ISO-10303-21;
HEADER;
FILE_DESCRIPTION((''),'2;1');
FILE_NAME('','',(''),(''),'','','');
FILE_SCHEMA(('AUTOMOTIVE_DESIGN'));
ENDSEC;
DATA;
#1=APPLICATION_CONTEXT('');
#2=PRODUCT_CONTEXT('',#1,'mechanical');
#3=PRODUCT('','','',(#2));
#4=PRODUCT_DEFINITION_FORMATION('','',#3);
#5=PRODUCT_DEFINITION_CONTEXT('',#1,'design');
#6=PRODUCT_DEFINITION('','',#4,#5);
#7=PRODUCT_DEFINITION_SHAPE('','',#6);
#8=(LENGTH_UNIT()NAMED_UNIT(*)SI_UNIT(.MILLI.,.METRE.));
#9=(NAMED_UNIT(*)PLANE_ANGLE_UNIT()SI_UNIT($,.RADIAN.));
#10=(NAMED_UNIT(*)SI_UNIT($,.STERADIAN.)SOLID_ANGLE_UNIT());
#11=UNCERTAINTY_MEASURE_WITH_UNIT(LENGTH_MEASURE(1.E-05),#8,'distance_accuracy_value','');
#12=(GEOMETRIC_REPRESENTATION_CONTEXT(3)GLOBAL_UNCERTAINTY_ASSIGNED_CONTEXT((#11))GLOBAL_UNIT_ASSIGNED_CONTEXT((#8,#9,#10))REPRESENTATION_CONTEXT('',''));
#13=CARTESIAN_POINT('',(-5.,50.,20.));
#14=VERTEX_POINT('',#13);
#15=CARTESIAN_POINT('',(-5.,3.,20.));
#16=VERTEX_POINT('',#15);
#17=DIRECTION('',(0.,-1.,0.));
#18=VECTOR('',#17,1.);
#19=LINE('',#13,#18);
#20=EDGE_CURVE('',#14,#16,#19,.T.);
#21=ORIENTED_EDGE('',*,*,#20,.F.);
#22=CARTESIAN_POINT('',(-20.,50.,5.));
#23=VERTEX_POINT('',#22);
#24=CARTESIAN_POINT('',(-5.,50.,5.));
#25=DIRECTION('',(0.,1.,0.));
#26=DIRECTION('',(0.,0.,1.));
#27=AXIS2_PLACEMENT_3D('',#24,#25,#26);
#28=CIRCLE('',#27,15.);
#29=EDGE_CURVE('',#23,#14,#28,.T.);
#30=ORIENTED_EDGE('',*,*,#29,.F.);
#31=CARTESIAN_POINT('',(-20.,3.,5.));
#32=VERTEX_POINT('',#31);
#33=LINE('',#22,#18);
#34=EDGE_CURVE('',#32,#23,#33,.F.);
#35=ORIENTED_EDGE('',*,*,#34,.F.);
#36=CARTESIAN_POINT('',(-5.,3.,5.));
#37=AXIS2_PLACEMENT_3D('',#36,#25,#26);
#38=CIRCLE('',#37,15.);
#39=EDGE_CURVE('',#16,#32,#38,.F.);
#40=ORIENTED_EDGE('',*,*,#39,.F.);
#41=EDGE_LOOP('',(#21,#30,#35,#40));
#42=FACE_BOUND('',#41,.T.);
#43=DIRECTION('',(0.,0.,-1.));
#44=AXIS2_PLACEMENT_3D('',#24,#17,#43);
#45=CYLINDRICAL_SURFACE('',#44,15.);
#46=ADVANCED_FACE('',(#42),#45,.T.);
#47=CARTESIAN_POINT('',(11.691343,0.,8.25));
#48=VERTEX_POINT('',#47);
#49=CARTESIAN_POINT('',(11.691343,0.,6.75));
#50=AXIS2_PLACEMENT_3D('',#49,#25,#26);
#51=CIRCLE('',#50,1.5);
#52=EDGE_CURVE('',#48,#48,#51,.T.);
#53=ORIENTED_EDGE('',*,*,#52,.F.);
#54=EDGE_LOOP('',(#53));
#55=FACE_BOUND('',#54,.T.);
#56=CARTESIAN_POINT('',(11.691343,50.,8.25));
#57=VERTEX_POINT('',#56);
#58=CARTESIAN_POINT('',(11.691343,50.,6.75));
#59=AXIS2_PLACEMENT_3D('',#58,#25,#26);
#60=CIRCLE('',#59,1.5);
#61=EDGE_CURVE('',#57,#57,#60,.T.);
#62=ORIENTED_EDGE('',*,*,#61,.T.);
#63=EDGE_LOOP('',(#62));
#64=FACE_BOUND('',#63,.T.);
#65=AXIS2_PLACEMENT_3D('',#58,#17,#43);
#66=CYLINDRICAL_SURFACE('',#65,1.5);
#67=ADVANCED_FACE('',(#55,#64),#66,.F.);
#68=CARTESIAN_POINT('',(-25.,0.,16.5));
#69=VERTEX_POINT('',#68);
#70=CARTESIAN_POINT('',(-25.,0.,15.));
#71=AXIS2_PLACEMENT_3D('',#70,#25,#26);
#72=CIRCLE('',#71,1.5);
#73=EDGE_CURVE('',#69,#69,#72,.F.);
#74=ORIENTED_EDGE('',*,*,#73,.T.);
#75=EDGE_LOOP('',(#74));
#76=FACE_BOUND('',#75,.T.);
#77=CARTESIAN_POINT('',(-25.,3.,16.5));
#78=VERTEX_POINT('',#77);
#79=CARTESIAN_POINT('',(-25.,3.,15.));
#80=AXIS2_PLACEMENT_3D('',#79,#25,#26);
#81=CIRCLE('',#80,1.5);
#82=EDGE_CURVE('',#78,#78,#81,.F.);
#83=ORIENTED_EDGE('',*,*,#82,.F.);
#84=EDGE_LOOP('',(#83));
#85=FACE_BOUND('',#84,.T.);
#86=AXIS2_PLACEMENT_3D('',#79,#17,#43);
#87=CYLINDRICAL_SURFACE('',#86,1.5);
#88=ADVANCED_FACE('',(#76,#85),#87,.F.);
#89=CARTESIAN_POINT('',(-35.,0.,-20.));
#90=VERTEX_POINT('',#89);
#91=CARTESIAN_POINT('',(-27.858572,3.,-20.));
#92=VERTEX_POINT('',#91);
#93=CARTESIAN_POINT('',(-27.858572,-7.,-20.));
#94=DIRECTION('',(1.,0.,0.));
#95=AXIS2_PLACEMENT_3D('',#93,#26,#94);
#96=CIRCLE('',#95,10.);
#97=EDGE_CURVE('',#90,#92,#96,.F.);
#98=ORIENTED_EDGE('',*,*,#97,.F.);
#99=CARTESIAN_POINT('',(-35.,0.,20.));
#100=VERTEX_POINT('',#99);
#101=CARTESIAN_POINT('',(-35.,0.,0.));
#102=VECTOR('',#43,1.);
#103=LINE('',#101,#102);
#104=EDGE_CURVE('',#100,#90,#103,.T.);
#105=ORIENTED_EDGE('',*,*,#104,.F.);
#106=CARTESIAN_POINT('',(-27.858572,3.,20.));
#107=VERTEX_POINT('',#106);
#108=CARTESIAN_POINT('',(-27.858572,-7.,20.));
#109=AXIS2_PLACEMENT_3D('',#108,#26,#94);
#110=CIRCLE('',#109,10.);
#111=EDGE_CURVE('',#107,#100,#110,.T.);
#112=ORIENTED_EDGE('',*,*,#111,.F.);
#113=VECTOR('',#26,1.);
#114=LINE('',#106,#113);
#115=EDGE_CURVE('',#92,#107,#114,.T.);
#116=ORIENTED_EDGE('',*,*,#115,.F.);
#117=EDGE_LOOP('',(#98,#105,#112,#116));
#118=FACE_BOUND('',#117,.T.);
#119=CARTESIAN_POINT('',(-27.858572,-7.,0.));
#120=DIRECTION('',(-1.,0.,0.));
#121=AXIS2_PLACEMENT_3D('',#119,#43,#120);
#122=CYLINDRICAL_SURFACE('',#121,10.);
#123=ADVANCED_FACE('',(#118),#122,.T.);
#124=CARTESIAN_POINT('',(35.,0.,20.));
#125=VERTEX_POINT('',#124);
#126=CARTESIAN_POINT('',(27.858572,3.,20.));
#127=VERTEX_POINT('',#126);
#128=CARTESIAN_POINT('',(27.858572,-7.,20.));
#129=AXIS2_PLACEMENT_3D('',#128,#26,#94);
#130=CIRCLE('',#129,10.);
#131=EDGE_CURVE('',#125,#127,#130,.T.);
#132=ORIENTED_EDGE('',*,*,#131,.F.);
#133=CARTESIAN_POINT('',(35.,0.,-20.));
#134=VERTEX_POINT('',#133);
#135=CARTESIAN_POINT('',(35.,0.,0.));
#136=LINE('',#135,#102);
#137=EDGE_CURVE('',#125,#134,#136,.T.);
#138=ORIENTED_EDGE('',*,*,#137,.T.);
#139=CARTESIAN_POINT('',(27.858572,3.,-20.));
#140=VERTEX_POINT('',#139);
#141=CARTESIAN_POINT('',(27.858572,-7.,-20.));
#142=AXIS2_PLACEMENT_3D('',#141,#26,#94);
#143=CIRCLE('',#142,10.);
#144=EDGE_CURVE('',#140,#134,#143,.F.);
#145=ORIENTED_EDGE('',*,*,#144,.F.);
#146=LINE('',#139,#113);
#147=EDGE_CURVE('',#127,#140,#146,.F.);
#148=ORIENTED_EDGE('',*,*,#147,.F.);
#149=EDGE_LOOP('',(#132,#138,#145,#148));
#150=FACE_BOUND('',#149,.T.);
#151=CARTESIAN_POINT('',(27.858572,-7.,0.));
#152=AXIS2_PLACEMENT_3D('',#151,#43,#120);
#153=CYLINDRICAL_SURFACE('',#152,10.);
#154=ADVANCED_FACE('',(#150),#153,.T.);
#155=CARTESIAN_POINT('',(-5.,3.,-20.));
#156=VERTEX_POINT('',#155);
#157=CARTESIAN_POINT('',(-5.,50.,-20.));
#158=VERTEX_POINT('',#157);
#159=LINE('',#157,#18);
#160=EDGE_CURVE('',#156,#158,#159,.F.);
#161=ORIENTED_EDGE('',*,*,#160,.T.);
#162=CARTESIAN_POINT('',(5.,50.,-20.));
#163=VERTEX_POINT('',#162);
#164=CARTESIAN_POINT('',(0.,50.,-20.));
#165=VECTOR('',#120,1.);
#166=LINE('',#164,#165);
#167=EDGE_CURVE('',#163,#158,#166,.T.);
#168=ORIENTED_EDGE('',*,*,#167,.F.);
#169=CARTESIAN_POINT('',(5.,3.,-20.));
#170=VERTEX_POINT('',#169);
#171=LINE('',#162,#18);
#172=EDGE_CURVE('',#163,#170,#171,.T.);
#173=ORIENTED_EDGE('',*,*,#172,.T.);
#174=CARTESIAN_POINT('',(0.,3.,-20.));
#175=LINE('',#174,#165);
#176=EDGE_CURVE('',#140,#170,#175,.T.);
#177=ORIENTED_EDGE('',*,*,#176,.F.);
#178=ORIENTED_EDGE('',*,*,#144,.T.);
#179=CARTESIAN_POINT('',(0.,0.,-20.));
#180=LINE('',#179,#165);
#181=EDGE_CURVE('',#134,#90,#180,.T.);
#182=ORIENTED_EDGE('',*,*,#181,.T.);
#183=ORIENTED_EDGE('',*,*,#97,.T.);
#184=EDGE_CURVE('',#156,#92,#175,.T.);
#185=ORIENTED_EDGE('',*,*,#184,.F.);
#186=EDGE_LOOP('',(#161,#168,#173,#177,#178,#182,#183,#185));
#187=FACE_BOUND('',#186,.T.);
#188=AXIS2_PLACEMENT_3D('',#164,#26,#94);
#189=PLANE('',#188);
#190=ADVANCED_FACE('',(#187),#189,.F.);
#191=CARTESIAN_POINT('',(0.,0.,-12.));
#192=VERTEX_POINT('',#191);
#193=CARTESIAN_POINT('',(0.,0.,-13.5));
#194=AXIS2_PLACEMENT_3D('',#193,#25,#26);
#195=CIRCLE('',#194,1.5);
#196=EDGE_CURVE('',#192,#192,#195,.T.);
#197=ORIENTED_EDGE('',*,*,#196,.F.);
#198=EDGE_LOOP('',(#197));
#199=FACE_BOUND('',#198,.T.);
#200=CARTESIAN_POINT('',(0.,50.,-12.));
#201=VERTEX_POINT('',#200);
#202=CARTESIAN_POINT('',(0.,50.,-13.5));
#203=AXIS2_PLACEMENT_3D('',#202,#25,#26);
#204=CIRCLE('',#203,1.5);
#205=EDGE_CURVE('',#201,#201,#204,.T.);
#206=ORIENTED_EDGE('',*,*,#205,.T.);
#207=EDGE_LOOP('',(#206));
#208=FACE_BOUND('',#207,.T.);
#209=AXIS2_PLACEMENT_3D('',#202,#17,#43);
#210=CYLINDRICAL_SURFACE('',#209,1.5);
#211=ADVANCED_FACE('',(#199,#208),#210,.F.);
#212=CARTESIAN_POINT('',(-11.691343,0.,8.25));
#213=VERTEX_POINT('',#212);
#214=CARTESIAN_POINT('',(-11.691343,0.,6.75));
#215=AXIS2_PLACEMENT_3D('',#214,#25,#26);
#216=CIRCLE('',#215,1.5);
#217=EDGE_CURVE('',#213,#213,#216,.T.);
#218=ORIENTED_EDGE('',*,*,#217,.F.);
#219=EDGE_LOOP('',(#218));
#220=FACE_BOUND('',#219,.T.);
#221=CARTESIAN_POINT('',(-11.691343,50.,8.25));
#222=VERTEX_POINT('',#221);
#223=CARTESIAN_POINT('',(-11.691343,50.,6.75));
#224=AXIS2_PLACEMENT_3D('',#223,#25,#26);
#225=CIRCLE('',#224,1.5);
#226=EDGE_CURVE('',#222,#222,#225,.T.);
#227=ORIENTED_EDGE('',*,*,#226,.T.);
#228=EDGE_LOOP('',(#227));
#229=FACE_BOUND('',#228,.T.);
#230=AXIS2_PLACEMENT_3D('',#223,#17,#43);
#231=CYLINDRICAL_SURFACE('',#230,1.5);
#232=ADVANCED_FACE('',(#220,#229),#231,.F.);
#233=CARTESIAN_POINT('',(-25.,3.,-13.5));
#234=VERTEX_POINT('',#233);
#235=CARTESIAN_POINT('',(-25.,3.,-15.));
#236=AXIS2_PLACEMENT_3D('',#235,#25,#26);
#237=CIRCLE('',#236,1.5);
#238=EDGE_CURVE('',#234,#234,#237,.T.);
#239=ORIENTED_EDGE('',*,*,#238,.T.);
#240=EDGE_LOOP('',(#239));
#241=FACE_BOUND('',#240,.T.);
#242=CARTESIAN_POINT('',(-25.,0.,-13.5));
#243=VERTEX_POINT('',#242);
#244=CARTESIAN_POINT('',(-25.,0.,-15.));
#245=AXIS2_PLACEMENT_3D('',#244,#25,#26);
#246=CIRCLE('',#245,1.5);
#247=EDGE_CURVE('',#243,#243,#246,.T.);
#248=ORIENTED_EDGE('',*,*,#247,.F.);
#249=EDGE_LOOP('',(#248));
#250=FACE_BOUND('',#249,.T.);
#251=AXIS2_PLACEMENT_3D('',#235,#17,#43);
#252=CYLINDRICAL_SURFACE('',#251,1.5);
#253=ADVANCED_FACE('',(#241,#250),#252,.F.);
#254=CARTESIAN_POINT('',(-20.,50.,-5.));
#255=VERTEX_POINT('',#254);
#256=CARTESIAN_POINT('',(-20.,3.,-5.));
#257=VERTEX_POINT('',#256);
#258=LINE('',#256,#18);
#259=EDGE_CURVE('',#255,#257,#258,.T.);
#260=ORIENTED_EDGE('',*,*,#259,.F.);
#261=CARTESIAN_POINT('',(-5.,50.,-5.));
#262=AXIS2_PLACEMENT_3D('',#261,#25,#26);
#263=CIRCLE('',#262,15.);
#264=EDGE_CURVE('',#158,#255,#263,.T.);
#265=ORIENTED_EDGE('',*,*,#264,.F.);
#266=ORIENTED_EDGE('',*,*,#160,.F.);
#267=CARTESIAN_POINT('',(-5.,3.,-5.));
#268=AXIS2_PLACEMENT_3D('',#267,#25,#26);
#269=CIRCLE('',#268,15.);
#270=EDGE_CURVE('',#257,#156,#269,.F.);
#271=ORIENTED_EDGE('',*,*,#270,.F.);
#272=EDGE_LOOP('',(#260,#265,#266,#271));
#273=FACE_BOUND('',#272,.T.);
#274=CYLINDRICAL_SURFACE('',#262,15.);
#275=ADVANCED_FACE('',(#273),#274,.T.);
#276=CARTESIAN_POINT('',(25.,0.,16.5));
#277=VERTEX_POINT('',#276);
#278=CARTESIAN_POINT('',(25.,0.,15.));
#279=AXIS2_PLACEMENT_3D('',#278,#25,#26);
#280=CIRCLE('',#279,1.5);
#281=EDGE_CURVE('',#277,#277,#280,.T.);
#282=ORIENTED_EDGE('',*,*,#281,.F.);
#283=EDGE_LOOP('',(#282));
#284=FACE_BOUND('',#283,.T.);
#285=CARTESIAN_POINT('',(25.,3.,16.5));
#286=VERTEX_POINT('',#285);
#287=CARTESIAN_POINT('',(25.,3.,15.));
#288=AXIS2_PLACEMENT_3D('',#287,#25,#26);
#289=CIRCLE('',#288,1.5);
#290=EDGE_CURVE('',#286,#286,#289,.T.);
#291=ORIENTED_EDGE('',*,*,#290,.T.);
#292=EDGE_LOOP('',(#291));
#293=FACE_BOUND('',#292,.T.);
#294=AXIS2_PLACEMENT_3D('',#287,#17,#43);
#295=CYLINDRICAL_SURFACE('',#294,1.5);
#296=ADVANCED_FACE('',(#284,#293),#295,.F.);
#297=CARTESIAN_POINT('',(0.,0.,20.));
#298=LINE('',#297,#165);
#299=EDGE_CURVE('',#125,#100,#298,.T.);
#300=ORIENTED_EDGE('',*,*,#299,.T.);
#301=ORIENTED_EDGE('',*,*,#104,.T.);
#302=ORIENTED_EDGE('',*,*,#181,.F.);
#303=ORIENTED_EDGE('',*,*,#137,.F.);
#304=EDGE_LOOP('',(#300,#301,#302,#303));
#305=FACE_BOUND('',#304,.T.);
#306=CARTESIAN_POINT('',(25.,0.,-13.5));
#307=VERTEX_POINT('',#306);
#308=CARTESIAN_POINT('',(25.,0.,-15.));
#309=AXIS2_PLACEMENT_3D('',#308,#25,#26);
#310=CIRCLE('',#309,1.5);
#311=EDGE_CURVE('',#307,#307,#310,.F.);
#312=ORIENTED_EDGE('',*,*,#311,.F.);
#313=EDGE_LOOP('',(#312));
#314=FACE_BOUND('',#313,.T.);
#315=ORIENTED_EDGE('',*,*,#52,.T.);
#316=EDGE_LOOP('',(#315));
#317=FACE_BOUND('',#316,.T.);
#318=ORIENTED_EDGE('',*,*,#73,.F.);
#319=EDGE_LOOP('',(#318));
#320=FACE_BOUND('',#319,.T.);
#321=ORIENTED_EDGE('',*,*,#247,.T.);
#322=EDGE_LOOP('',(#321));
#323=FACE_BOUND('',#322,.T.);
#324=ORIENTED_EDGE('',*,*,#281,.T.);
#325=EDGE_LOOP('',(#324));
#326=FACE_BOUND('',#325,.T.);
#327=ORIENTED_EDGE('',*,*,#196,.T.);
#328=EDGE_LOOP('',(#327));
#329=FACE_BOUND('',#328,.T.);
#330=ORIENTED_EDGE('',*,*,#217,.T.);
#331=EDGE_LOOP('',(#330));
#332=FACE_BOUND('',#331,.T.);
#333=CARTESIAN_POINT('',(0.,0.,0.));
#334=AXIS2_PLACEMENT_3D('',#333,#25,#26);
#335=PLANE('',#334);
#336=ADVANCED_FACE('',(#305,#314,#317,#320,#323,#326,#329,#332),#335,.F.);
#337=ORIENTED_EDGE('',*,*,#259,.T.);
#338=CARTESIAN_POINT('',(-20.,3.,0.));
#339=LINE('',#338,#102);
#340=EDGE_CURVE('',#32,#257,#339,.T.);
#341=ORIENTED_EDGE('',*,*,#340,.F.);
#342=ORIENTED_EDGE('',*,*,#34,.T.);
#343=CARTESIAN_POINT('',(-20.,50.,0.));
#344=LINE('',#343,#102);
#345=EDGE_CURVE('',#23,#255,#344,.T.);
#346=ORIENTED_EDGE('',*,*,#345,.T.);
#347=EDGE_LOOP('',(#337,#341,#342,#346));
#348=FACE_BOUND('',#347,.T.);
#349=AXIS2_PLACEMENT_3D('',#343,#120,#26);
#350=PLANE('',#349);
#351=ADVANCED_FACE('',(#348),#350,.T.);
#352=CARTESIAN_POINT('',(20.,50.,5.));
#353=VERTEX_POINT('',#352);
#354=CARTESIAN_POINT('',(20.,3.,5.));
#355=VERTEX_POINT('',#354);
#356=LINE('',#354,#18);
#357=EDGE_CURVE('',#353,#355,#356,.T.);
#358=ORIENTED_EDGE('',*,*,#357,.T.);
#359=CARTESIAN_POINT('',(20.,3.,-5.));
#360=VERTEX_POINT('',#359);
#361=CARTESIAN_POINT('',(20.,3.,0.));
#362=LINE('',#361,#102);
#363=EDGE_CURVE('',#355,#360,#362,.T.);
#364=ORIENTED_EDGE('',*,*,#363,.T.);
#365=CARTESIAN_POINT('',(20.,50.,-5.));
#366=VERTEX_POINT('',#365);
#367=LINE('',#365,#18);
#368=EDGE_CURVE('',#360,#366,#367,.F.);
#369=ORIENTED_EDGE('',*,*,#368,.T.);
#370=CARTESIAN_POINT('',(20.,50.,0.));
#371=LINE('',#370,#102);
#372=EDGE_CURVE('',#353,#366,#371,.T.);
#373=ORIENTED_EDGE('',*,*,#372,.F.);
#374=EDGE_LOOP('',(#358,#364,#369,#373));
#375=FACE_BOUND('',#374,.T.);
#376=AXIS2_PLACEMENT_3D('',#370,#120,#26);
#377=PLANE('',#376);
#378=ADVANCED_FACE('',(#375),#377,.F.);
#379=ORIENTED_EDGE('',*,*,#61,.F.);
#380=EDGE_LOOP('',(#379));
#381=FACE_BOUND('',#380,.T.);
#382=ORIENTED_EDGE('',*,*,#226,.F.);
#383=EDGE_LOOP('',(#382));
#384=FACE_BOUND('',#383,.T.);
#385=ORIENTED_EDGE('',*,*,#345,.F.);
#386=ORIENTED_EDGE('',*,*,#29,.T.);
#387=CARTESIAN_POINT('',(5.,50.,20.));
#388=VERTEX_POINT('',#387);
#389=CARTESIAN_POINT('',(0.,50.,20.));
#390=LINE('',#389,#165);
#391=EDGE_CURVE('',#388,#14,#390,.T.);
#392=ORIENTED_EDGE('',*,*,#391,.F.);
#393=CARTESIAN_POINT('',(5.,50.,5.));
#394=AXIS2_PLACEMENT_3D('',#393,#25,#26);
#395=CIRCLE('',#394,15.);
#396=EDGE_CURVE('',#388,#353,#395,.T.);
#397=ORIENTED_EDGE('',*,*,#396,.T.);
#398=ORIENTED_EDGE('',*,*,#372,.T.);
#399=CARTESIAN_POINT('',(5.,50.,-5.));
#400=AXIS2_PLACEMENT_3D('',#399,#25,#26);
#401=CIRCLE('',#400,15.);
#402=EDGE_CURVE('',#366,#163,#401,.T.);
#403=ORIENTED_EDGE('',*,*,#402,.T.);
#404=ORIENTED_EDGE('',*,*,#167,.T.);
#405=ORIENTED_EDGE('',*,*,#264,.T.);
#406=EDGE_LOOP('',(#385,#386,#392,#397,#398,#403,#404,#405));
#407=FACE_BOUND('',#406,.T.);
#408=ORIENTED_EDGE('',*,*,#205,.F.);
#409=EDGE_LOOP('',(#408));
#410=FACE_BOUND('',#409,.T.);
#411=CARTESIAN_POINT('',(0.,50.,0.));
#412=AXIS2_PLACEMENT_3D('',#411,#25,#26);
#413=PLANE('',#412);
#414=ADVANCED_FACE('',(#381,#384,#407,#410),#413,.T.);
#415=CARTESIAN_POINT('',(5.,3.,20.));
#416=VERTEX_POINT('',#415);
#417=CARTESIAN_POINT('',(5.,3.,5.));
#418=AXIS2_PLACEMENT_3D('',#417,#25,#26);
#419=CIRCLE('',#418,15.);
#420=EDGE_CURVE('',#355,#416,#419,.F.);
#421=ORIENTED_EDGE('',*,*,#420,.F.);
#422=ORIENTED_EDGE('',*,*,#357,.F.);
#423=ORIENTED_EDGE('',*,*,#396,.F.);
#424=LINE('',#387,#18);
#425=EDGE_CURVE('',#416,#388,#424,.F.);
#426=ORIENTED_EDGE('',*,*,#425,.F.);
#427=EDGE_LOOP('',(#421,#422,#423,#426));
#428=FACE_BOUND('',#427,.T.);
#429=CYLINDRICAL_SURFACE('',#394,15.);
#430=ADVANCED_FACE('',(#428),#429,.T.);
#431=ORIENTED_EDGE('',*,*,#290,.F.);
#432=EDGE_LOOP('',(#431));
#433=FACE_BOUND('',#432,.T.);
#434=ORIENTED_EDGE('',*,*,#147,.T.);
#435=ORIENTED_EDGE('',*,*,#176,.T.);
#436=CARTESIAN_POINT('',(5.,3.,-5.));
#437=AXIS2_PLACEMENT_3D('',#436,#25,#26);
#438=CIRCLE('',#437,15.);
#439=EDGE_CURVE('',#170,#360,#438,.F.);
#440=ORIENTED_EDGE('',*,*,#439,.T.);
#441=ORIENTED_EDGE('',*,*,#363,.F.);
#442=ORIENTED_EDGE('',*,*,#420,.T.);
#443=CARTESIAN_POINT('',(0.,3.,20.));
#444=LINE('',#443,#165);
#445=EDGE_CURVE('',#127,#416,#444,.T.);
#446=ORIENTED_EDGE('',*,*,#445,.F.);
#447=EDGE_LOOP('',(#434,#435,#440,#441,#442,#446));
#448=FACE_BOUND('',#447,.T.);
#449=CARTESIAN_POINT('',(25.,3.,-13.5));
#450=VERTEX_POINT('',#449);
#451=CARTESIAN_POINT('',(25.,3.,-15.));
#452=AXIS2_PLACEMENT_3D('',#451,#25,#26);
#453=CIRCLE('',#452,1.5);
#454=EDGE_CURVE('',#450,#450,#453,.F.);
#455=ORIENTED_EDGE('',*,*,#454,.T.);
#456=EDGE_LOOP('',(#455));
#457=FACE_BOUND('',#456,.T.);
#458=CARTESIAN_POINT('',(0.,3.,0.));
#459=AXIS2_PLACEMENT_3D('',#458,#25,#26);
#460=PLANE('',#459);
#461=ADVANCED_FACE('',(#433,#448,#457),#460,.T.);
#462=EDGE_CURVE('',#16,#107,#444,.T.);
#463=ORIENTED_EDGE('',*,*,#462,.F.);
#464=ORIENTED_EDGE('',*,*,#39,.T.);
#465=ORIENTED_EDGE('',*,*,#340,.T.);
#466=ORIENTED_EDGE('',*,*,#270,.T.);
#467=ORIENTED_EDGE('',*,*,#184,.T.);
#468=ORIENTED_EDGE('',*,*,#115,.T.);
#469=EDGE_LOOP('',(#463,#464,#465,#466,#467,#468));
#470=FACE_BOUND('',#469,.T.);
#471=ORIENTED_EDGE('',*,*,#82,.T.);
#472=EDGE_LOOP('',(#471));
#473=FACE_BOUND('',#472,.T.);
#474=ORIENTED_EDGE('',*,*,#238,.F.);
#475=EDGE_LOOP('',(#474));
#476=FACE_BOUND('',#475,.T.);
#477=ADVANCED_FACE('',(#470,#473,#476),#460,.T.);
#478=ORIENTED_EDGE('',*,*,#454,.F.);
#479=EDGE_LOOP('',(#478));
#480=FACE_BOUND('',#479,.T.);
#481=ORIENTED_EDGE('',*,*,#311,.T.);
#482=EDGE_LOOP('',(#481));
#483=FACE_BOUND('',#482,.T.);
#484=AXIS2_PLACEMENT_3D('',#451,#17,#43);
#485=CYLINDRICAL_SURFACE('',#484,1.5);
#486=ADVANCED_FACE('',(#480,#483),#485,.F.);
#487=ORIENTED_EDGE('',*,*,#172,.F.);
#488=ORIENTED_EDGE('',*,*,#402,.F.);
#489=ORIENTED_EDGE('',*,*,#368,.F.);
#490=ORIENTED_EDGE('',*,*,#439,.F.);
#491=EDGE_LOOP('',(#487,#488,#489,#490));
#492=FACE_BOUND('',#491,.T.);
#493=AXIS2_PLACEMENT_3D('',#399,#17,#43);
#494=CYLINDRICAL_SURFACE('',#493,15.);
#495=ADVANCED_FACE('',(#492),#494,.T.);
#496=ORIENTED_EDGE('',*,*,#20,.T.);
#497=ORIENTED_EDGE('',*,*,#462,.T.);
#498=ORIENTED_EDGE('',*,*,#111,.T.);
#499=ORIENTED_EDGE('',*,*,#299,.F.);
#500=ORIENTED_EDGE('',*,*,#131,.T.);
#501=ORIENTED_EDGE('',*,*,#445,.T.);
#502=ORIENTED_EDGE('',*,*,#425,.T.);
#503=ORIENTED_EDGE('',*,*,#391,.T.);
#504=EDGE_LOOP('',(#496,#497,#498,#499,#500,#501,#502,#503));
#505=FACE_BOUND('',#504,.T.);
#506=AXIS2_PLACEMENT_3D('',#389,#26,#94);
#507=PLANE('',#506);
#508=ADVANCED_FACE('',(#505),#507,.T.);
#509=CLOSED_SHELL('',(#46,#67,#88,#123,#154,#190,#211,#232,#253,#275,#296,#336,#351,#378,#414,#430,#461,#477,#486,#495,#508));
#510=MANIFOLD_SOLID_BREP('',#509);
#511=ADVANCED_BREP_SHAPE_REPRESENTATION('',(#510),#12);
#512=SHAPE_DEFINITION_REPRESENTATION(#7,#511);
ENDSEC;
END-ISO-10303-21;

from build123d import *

# Parameters (mm, degrees)
SKETCH1_W           = 40
SKETCH1_H           = 40
SKETCH1_R           = 1.5
BOSS_EXTRUDE1_DEPTH = 50
SKETCH1_3_W         = 15
SKETCH1_3_H         = 40
SKETCH1_3_R         = 1.5
BOSS_EXTRUDE2_DEPTH = 3
FILLET1_R           = 10
FILLET2_R           = 15


with BuildPart() as part:
    # Sketch1 → Boss-Extrude1 (new body)
    with BuildSketch(Plane(origin=(0, 0, 0), x_dir=(1, 0, 0), z_dir=(0, 1, 0))):
        Rectangle(SKETCH1_W, SKETCH1_H)
        with Locations(Location((-11.691342951, -6.75, 0), (0, 0, 270))):
            Circle(SKETCH1_R, mode=Mode.SUBTRACT)
        with Locations(Location((11.691342951, -6.75, 0), (0, 0, 270))):
            Circle(SKETCH1_R, mode=Mode.SUBTRACT)
        with Locations(Location((0, 13.5, 0), (0, 0, 270))):
            Circle(SKETCH1_R, mode=Mode.SUBTRACT)
    extrude(amount=BOSS_EXTRUDE1_DEPTH)

    # Sketch1<3> → Boss-Extrude2 (add)
    # profile 1 of 2: a face of its own
    with BuildSketch(Plane(origin=(0, 0, 0), x_dir=(1, 0, 0), z_dir=(0, 1, 0))):
        with Locations((-27.5, 0)):
            Rectangle(SKETCH1_3_W, SKETCH1_3_H)
        with Locations(Location((-25, -15, 0), (0, 0, 270))):
            Circle(SKETCH1_3_R, mode=Mode.SUBTRACT)
        with Locations(Location((-25, 15, 0), (0, 0, 270))):
            Circle(SKETCH1_3_R, mode=Mode.SUBTRACT)
    # profile 2 of 2: a face of its own
    with BuildSketch(Plane(origin=(0, 0, 0), x_dir=(1, 0, 0), z_dir=(0, 1, 0))):
        with Locations((27.5, 0)):
            Rectangle(SKETCH1_3_W, SKETCH1_3_H)
        with Locations(Location((25, -15, 0), (0, 0, 270))):
            Circle(SKETCH1_3_R, mode=Mode.SUBTRACT)
        with Locations(Location((25, 15, 0), (0, 0, 270))):
            Circle(SKETCH1_3_R, mode=Mode.SUBTRACT)
    extrude(amount=BOSS_EXTRUDE2_DEPTH)

    # Fillet1
    # the kernel refuses this fillet: 10 mm, written as the material it takes off along each edge
    with BuildSketch(Plane(origin=(35, 3, 37.853571071), x_dir=(0, -1, 0), z_dir=(0, 0, -1))) as fillet1_piece_1:
        with BuildLine():
            CenterArc((10, 7.141428429), FILLET1_R, 180, 45.572995999)
            Line((0, 7.141428429), (-0.2, 7.141428429))
            Line((-0.2, 7.141428429), (-0.2, 0))
            Line((-0.2, 0), (0, -0.2))
            ThreePointArc((0, -0.2), (1.5, -0.2), (2.86, -0.142828569))
            Line((2.86, -0.142828569), (3, 0))
        make_face()
    extrude(amount=75.707142143, mode=Mode.SUBTRACT)
    with BuildSketch(Plane(origin=(-35, 3, -37.853571071), x_dir=(1, 0, 0), z_dir=(0, 0, 1))) as fillet1_piece_2:
        with BuildLine():
            CenterArc((7.141428429, -10), FILLET1_R, 90, 45.572995999)
            Line((0, -3), (-0.142828569, -2.86))
            ThreePointArc((-0.142828569, -2.86), (-0.2, -1.5), (-0.2, 0))
            Line((-0.2, 0), (0, 0.2))
            Line((0, 0.2), (7.141428429, 0.2))
            Line((7.141428429, 0.2), (7.141428429, 0))
        make_face()
    extrude(amount=75.707142143, mode=Mode.SUBTRACT)

    # Fillet2
    fillet2_edges = [part.edges().sort_by_distance(p)[0] for p in [
        (-20, 26.5, -20),
        (20, 26.5, -20),
        (20, 26.5, 20),
        (-20, 26.5, 20),
    ]]
    fillet(fillet2_edges, radius=FILLET2_R)


solid = part.part
